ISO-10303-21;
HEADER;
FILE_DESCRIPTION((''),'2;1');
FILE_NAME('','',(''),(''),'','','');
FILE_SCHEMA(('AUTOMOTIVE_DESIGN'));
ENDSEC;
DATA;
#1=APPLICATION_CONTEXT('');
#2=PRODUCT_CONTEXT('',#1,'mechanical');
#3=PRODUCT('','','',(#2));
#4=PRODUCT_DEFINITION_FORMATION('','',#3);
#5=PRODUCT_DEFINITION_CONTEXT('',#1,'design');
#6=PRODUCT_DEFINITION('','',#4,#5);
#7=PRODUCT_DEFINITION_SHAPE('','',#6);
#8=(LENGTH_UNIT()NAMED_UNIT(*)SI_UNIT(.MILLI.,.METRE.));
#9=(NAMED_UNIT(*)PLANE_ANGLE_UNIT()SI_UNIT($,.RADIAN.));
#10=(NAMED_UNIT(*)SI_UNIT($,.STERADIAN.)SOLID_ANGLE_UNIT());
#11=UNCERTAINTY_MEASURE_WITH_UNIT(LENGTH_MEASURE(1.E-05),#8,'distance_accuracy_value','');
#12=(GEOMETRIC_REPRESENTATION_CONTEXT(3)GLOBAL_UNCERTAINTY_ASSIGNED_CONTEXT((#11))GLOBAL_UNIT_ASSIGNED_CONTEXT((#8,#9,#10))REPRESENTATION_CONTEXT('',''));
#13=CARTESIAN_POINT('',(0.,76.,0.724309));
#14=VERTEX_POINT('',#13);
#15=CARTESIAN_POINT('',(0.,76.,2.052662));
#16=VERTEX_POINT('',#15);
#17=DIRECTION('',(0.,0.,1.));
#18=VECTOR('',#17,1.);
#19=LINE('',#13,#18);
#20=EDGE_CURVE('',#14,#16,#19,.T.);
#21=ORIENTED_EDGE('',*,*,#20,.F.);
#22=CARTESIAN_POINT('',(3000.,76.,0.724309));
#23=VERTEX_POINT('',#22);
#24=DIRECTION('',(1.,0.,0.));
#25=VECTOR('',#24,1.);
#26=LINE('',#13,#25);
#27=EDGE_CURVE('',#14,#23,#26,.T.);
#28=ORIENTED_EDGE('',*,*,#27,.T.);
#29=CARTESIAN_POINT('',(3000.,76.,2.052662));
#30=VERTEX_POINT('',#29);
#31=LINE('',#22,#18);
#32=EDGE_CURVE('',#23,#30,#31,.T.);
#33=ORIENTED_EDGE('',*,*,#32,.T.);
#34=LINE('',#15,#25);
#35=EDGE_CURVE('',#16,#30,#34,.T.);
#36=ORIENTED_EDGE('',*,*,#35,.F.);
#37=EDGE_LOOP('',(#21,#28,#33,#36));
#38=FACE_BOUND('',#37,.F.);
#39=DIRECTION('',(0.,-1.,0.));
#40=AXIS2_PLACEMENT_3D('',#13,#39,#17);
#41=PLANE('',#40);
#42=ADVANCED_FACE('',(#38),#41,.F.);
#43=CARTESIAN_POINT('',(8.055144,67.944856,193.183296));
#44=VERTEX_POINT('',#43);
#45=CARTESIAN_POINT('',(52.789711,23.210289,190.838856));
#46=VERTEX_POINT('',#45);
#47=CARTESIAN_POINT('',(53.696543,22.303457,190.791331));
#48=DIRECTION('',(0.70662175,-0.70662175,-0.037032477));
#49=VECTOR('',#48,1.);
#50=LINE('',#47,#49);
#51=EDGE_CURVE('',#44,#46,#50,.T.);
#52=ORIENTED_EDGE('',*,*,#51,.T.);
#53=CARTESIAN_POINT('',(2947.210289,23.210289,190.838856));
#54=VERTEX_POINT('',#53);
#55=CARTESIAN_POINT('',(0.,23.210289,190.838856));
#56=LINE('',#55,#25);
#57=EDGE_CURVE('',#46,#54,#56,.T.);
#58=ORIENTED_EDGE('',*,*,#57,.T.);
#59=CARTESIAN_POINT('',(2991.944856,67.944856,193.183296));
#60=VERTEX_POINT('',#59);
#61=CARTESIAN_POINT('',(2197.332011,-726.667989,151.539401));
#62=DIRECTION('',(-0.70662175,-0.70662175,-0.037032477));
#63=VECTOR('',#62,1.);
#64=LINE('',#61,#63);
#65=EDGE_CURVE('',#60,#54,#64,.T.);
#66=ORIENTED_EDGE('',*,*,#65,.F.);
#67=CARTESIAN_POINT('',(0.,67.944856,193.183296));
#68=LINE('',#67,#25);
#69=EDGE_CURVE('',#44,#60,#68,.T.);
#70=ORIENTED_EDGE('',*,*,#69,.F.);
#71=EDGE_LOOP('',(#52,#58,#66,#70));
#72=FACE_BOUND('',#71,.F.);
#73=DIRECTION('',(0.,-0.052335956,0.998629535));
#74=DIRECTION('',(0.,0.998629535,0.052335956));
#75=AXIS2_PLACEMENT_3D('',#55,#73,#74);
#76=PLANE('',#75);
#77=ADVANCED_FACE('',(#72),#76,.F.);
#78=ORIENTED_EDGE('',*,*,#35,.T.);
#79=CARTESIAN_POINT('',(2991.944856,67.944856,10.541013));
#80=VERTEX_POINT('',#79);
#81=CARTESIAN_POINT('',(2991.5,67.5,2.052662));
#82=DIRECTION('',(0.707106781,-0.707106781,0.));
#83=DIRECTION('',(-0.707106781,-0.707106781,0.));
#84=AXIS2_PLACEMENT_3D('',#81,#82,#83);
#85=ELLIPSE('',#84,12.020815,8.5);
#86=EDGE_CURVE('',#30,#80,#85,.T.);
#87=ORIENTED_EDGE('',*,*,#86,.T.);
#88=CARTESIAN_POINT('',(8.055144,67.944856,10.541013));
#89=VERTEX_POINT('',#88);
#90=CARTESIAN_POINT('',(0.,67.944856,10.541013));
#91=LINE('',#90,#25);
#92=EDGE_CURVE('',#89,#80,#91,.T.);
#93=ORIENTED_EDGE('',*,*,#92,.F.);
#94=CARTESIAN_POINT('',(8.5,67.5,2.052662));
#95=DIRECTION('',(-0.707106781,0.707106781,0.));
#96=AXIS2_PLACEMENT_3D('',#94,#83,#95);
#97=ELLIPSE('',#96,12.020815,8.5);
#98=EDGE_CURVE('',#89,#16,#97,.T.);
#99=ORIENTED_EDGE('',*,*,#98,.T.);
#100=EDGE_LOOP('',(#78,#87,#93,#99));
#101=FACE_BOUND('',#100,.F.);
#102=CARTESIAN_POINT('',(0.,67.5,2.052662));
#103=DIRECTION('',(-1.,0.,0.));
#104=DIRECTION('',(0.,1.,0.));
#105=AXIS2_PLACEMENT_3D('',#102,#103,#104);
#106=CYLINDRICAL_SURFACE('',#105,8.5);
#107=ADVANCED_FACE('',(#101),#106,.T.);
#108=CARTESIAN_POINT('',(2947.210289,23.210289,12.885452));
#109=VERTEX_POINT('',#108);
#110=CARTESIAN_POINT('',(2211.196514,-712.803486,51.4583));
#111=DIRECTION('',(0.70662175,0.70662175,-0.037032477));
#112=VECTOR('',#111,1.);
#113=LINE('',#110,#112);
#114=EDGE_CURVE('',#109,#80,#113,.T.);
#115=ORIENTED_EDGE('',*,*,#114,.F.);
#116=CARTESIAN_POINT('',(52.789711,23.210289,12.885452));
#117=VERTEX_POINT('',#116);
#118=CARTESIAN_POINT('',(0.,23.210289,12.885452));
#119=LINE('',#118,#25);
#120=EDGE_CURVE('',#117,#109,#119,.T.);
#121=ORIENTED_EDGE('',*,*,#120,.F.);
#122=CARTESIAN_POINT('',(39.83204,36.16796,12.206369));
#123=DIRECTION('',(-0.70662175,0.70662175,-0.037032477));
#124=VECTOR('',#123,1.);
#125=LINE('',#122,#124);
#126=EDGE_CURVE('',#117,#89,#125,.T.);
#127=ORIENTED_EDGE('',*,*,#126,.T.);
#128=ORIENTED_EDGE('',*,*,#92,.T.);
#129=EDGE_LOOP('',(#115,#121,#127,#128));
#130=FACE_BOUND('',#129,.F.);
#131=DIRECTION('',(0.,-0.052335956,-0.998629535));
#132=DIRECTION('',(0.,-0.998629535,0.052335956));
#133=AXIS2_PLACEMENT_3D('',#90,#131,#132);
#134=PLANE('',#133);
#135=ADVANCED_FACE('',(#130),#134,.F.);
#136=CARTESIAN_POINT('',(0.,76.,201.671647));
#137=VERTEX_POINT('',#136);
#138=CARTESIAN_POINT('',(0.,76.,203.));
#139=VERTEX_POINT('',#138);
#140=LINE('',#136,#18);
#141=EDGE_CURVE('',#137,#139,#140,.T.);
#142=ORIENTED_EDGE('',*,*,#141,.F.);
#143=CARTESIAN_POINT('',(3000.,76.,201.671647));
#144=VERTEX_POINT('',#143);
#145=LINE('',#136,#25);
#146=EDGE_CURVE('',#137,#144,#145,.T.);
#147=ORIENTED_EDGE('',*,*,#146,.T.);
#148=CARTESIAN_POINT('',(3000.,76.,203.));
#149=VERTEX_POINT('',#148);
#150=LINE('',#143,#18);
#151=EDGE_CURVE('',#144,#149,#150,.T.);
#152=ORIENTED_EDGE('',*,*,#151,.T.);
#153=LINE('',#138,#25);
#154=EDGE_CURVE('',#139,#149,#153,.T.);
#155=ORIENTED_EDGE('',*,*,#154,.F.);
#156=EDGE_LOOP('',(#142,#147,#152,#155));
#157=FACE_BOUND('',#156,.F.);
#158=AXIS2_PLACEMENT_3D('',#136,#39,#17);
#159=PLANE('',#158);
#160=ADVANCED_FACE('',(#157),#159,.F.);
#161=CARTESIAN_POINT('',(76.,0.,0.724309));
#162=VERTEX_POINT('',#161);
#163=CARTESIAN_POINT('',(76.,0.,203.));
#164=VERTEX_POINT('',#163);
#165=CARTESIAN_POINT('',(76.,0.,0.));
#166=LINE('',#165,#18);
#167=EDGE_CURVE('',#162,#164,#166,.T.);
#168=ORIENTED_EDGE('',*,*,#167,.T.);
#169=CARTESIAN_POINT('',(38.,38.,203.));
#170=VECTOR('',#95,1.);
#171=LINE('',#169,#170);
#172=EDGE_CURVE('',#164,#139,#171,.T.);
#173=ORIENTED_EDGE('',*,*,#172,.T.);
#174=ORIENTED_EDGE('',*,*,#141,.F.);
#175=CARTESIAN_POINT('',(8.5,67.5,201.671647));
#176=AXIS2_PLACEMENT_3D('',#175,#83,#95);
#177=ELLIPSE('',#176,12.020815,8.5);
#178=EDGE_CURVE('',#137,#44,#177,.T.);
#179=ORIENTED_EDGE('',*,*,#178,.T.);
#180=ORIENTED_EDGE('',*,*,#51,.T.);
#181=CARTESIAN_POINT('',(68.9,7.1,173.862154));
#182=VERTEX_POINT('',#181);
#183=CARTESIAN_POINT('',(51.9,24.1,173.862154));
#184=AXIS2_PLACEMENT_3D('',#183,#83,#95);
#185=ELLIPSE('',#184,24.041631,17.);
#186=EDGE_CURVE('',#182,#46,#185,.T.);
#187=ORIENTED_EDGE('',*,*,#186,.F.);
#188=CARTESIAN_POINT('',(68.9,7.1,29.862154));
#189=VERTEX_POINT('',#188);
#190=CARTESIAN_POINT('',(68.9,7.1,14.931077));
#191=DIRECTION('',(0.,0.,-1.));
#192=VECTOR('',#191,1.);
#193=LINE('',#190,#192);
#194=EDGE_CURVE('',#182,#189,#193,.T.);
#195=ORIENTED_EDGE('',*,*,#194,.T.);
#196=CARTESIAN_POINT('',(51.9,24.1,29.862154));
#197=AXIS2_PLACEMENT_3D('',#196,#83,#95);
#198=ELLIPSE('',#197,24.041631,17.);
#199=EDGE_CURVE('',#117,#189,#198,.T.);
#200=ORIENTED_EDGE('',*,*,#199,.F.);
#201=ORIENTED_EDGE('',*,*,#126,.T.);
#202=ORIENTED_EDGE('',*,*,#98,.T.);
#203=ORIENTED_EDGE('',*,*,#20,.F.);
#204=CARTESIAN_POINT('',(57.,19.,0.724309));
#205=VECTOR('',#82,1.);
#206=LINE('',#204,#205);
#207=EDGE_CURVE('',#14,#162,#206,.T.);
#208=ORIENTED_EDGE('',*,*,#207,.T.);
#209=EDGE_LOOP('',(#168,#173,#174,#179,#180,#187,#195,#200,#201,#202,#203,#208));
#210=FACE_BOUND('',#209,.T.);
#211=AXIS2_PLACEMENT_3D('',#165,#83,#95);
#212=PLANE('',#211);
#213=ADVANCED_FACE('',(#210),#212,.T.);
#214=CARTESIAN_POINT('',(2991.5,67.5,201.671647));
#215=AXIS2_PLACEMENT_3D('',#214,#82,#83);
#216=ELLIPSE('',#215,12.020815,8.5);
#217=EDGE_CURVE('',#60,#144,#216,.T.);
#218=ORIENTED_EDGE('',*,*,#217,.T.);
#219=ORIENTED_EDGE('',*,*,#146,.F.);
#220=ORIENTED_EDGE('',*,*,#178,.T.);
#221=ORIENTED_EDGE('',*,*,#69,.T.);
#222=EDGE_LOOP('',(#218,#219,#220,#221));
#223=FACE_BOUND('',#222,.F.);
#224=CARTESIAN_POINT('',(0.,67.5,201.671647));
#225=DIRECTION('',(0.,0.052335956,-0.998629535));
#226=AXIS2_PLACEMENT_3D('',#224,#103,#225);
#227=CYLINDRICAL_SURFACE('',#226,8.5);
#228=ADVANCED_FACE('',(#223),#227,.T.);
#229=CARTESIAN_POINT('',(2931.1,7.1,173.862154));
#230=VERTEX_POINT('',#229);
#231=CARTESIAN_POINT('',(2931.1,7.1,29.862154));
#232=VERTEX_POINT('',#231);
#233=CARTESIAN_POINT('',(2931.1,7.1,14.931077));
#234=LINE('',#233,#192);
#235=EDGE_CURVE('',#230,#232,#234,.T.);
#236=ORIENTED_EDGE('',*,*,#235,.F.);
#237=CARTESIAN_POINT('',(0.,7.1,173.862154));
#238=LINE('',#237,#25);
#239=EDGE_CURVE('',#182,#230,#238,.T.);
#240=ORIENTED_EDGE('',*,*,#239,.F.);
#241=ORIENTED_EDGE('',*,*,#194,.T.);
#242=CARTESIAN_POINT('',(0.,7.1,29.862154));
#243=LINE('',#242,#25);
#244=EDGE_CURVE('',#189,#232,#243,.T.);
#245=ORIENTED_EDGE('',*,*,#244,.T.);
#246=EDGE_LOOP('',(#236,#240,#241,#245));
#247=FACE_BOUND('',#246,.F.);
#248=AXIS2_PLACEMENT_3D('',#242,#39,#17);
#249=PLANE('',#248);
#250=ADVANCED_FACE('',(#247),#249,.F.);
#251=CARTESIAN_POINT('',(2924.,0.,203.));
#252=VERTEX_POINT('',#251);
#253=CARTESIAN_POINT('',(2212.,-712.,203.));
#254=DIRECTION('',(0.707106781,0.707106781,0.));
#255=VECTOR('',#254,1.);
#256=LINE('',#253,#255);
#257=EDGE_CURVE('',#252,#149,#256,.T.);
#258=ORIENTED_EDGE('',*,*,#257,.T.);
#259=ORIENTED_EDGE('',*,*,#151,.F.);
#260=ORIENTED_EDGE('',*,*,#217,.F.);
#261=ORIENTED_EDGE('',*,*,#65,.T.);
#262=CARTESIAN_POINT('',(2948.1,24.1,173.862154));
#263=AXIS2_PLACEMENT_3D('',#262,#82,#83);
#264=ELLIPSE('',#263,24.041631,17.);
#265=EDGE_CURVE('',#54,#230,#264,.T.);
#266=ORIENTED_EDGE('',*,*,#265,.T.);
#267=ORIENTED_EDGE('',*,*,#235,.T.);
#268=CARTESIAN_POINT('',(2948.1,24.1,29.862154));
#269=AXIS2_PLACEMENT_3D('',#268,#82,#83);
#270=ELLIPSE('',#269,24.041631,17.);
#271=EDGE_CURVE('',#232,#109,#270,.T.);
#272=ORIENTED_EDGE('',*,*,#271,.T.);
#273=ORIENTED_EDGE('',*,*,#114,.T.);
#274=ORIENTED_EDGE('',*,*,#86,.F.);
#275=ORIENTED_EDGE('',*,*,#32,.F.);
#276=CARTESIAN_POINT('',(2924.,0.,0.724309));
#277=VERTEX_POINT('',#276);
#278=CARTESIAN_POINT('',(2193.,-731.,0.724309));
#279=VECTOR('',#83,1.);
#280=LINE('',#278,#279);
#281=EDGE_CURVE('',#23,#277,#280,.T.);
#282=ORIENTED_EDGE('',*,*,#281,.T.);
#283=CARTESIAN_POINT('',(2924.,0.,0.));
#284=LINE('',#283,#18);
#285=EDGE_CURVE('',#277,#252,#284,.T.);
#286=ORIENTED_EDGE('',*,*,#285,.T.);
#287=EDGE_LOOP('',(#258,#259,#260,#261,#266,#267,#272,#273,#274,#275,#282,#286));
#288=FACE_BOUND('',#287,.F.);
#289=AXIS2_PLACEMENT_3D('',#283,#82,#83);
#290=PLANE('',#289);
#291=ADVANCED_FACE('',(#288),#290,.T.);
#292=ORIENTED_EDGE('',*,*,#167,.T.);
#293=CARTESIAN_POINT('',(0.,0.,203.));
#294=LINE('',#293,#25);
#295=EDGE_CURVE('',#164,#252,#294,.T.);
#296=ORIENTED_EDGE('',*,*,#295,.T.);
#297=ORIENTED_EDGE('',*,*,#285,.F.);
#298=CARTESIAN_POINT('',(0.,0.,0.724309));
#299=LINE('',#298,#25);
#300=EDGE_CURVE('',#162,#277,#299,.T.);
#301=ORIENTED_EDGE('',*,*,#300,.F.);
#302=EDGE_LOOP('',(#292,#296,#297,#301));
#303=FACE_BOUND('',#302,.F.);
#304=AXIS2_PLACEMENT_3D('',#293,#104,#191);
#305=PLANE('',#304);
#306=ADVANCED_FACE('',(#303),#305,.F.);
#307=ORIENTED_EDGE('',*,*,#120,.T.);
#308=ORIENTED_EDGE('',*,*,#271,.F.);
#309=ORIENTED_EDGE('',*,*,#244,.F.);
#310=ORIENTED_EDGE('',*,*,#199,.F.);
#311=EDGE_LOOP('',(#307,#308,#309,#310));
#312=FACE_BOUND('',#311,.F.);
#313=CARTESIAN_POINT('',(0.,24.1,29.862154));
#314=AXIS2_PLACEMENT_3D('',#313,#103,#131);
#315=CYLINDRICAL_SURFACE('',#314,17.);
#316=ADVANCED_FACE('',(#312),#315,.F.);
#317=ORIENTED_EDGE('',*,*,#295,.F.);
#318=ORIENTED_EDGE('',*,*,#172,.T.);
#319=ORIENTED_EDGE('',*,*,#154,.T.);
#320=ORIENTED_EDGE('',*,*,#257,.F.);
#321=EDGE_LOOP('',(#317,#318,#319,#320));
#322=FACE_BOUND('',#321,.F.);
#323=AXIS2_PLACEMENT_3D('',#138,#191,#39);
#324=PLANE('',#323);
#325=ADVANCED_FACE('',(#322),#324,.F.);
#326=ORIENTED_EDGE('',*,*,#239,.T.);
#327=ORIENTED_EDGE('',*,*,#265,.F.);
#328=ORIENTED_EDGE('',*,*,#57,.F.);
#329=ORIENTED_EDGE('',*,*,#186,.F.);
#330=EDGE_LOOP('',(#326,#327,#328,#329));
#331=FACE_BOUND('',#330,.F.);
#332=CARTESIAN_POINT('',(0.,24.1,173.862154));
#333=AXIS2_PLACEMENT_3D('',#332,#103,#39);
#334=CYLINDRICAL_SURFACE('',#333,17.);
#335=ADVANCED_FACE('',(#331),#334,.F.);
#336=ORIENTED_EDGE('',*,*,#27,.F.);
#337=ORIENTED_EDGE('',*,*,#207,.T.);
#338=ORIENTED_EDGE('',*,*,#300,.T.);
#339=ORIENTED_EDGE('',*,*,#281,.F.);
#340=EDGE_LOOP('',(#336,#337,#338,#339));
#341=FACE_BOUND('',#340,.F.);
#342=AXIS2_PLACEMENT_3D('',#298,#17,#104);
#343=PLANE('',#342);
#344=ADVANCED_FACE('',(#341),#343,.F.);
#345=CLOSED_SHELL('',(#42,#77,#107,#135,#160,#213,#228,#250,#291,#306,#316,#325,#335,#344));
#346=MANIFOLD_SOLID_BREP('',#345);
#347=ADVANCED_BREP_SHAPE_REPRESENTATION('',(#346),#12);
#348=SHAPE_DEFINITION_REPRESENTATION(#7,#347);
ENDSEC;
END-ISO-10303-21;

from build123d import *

# Parameters (mm, degrees)
F1_DEPTH = 3000
F3_DEPTH = 203.001


# Not quite as in the source:
# - a pattern or mirror of a feature is missing from the dataset's text; its kind, count and spacing are read off the source's solid


with BuildPart() as f1:
    # F0 (on Right) → F1 (new body)
    with BuildSketch(Plane.YZ):
        with BuildLine():
            Line((0, 203), (0, 0.7243087391))
            Line((0, 0.7243087391), (76, 0.7243087391))
            Line((76, 0.7243087391), (76, 2.0526619257))
            ThreePointArc((76, 2.0526619257), (73.6656821536, 7.9036758191), (67.9448556281, 10.5410129711))
            Line((67.9448556281, 10.5410129711), (23.2102887439, 12.8854522787))
            ThreePointArc((23.2102887439, 12.8854522787), (11.7686356928, 18.1601265828), (7.1, 29.8621543695))
            Line((7.1, 29.8621543695), (7.1, 173.8621543695))
            ThreePointArc((7.1, 173.8621543695), (11.7686356928, 185.5641821563), (23.2102887439, 190.8388564604))
            Line((23.2102887439, 190.8388564604), (67.9448556281, 193.183295768))
            ThreePointArc((67.9448556281, 193.183295768), (73.6656821536, 195.82063292), (76, 201.6716468134))
            Line((76, 201.6716468134), (76, 203))
            Line((76, 203), (0, 203))
        make_face()
    extrude(amount=F1_DEPTH)

    # F2 (on Top) → F3 (cut, through all)
    with BuildSketch(Plane.XY):
        Polygon((0, 76), (0, 0), (76, 0), align=None)
    f3 = extrude(amount=F3_DEPTH, mode=Mode.SUBTRACT)

    # F3_copies: F3 across plane
    add(f3.mirror(Plane(origin=(1500, 0, 0), x_dir=(0, 0, 1), z_dir=(1, 0, 0))), mode=Mode.SUBTRACT)


solid = f1.part
